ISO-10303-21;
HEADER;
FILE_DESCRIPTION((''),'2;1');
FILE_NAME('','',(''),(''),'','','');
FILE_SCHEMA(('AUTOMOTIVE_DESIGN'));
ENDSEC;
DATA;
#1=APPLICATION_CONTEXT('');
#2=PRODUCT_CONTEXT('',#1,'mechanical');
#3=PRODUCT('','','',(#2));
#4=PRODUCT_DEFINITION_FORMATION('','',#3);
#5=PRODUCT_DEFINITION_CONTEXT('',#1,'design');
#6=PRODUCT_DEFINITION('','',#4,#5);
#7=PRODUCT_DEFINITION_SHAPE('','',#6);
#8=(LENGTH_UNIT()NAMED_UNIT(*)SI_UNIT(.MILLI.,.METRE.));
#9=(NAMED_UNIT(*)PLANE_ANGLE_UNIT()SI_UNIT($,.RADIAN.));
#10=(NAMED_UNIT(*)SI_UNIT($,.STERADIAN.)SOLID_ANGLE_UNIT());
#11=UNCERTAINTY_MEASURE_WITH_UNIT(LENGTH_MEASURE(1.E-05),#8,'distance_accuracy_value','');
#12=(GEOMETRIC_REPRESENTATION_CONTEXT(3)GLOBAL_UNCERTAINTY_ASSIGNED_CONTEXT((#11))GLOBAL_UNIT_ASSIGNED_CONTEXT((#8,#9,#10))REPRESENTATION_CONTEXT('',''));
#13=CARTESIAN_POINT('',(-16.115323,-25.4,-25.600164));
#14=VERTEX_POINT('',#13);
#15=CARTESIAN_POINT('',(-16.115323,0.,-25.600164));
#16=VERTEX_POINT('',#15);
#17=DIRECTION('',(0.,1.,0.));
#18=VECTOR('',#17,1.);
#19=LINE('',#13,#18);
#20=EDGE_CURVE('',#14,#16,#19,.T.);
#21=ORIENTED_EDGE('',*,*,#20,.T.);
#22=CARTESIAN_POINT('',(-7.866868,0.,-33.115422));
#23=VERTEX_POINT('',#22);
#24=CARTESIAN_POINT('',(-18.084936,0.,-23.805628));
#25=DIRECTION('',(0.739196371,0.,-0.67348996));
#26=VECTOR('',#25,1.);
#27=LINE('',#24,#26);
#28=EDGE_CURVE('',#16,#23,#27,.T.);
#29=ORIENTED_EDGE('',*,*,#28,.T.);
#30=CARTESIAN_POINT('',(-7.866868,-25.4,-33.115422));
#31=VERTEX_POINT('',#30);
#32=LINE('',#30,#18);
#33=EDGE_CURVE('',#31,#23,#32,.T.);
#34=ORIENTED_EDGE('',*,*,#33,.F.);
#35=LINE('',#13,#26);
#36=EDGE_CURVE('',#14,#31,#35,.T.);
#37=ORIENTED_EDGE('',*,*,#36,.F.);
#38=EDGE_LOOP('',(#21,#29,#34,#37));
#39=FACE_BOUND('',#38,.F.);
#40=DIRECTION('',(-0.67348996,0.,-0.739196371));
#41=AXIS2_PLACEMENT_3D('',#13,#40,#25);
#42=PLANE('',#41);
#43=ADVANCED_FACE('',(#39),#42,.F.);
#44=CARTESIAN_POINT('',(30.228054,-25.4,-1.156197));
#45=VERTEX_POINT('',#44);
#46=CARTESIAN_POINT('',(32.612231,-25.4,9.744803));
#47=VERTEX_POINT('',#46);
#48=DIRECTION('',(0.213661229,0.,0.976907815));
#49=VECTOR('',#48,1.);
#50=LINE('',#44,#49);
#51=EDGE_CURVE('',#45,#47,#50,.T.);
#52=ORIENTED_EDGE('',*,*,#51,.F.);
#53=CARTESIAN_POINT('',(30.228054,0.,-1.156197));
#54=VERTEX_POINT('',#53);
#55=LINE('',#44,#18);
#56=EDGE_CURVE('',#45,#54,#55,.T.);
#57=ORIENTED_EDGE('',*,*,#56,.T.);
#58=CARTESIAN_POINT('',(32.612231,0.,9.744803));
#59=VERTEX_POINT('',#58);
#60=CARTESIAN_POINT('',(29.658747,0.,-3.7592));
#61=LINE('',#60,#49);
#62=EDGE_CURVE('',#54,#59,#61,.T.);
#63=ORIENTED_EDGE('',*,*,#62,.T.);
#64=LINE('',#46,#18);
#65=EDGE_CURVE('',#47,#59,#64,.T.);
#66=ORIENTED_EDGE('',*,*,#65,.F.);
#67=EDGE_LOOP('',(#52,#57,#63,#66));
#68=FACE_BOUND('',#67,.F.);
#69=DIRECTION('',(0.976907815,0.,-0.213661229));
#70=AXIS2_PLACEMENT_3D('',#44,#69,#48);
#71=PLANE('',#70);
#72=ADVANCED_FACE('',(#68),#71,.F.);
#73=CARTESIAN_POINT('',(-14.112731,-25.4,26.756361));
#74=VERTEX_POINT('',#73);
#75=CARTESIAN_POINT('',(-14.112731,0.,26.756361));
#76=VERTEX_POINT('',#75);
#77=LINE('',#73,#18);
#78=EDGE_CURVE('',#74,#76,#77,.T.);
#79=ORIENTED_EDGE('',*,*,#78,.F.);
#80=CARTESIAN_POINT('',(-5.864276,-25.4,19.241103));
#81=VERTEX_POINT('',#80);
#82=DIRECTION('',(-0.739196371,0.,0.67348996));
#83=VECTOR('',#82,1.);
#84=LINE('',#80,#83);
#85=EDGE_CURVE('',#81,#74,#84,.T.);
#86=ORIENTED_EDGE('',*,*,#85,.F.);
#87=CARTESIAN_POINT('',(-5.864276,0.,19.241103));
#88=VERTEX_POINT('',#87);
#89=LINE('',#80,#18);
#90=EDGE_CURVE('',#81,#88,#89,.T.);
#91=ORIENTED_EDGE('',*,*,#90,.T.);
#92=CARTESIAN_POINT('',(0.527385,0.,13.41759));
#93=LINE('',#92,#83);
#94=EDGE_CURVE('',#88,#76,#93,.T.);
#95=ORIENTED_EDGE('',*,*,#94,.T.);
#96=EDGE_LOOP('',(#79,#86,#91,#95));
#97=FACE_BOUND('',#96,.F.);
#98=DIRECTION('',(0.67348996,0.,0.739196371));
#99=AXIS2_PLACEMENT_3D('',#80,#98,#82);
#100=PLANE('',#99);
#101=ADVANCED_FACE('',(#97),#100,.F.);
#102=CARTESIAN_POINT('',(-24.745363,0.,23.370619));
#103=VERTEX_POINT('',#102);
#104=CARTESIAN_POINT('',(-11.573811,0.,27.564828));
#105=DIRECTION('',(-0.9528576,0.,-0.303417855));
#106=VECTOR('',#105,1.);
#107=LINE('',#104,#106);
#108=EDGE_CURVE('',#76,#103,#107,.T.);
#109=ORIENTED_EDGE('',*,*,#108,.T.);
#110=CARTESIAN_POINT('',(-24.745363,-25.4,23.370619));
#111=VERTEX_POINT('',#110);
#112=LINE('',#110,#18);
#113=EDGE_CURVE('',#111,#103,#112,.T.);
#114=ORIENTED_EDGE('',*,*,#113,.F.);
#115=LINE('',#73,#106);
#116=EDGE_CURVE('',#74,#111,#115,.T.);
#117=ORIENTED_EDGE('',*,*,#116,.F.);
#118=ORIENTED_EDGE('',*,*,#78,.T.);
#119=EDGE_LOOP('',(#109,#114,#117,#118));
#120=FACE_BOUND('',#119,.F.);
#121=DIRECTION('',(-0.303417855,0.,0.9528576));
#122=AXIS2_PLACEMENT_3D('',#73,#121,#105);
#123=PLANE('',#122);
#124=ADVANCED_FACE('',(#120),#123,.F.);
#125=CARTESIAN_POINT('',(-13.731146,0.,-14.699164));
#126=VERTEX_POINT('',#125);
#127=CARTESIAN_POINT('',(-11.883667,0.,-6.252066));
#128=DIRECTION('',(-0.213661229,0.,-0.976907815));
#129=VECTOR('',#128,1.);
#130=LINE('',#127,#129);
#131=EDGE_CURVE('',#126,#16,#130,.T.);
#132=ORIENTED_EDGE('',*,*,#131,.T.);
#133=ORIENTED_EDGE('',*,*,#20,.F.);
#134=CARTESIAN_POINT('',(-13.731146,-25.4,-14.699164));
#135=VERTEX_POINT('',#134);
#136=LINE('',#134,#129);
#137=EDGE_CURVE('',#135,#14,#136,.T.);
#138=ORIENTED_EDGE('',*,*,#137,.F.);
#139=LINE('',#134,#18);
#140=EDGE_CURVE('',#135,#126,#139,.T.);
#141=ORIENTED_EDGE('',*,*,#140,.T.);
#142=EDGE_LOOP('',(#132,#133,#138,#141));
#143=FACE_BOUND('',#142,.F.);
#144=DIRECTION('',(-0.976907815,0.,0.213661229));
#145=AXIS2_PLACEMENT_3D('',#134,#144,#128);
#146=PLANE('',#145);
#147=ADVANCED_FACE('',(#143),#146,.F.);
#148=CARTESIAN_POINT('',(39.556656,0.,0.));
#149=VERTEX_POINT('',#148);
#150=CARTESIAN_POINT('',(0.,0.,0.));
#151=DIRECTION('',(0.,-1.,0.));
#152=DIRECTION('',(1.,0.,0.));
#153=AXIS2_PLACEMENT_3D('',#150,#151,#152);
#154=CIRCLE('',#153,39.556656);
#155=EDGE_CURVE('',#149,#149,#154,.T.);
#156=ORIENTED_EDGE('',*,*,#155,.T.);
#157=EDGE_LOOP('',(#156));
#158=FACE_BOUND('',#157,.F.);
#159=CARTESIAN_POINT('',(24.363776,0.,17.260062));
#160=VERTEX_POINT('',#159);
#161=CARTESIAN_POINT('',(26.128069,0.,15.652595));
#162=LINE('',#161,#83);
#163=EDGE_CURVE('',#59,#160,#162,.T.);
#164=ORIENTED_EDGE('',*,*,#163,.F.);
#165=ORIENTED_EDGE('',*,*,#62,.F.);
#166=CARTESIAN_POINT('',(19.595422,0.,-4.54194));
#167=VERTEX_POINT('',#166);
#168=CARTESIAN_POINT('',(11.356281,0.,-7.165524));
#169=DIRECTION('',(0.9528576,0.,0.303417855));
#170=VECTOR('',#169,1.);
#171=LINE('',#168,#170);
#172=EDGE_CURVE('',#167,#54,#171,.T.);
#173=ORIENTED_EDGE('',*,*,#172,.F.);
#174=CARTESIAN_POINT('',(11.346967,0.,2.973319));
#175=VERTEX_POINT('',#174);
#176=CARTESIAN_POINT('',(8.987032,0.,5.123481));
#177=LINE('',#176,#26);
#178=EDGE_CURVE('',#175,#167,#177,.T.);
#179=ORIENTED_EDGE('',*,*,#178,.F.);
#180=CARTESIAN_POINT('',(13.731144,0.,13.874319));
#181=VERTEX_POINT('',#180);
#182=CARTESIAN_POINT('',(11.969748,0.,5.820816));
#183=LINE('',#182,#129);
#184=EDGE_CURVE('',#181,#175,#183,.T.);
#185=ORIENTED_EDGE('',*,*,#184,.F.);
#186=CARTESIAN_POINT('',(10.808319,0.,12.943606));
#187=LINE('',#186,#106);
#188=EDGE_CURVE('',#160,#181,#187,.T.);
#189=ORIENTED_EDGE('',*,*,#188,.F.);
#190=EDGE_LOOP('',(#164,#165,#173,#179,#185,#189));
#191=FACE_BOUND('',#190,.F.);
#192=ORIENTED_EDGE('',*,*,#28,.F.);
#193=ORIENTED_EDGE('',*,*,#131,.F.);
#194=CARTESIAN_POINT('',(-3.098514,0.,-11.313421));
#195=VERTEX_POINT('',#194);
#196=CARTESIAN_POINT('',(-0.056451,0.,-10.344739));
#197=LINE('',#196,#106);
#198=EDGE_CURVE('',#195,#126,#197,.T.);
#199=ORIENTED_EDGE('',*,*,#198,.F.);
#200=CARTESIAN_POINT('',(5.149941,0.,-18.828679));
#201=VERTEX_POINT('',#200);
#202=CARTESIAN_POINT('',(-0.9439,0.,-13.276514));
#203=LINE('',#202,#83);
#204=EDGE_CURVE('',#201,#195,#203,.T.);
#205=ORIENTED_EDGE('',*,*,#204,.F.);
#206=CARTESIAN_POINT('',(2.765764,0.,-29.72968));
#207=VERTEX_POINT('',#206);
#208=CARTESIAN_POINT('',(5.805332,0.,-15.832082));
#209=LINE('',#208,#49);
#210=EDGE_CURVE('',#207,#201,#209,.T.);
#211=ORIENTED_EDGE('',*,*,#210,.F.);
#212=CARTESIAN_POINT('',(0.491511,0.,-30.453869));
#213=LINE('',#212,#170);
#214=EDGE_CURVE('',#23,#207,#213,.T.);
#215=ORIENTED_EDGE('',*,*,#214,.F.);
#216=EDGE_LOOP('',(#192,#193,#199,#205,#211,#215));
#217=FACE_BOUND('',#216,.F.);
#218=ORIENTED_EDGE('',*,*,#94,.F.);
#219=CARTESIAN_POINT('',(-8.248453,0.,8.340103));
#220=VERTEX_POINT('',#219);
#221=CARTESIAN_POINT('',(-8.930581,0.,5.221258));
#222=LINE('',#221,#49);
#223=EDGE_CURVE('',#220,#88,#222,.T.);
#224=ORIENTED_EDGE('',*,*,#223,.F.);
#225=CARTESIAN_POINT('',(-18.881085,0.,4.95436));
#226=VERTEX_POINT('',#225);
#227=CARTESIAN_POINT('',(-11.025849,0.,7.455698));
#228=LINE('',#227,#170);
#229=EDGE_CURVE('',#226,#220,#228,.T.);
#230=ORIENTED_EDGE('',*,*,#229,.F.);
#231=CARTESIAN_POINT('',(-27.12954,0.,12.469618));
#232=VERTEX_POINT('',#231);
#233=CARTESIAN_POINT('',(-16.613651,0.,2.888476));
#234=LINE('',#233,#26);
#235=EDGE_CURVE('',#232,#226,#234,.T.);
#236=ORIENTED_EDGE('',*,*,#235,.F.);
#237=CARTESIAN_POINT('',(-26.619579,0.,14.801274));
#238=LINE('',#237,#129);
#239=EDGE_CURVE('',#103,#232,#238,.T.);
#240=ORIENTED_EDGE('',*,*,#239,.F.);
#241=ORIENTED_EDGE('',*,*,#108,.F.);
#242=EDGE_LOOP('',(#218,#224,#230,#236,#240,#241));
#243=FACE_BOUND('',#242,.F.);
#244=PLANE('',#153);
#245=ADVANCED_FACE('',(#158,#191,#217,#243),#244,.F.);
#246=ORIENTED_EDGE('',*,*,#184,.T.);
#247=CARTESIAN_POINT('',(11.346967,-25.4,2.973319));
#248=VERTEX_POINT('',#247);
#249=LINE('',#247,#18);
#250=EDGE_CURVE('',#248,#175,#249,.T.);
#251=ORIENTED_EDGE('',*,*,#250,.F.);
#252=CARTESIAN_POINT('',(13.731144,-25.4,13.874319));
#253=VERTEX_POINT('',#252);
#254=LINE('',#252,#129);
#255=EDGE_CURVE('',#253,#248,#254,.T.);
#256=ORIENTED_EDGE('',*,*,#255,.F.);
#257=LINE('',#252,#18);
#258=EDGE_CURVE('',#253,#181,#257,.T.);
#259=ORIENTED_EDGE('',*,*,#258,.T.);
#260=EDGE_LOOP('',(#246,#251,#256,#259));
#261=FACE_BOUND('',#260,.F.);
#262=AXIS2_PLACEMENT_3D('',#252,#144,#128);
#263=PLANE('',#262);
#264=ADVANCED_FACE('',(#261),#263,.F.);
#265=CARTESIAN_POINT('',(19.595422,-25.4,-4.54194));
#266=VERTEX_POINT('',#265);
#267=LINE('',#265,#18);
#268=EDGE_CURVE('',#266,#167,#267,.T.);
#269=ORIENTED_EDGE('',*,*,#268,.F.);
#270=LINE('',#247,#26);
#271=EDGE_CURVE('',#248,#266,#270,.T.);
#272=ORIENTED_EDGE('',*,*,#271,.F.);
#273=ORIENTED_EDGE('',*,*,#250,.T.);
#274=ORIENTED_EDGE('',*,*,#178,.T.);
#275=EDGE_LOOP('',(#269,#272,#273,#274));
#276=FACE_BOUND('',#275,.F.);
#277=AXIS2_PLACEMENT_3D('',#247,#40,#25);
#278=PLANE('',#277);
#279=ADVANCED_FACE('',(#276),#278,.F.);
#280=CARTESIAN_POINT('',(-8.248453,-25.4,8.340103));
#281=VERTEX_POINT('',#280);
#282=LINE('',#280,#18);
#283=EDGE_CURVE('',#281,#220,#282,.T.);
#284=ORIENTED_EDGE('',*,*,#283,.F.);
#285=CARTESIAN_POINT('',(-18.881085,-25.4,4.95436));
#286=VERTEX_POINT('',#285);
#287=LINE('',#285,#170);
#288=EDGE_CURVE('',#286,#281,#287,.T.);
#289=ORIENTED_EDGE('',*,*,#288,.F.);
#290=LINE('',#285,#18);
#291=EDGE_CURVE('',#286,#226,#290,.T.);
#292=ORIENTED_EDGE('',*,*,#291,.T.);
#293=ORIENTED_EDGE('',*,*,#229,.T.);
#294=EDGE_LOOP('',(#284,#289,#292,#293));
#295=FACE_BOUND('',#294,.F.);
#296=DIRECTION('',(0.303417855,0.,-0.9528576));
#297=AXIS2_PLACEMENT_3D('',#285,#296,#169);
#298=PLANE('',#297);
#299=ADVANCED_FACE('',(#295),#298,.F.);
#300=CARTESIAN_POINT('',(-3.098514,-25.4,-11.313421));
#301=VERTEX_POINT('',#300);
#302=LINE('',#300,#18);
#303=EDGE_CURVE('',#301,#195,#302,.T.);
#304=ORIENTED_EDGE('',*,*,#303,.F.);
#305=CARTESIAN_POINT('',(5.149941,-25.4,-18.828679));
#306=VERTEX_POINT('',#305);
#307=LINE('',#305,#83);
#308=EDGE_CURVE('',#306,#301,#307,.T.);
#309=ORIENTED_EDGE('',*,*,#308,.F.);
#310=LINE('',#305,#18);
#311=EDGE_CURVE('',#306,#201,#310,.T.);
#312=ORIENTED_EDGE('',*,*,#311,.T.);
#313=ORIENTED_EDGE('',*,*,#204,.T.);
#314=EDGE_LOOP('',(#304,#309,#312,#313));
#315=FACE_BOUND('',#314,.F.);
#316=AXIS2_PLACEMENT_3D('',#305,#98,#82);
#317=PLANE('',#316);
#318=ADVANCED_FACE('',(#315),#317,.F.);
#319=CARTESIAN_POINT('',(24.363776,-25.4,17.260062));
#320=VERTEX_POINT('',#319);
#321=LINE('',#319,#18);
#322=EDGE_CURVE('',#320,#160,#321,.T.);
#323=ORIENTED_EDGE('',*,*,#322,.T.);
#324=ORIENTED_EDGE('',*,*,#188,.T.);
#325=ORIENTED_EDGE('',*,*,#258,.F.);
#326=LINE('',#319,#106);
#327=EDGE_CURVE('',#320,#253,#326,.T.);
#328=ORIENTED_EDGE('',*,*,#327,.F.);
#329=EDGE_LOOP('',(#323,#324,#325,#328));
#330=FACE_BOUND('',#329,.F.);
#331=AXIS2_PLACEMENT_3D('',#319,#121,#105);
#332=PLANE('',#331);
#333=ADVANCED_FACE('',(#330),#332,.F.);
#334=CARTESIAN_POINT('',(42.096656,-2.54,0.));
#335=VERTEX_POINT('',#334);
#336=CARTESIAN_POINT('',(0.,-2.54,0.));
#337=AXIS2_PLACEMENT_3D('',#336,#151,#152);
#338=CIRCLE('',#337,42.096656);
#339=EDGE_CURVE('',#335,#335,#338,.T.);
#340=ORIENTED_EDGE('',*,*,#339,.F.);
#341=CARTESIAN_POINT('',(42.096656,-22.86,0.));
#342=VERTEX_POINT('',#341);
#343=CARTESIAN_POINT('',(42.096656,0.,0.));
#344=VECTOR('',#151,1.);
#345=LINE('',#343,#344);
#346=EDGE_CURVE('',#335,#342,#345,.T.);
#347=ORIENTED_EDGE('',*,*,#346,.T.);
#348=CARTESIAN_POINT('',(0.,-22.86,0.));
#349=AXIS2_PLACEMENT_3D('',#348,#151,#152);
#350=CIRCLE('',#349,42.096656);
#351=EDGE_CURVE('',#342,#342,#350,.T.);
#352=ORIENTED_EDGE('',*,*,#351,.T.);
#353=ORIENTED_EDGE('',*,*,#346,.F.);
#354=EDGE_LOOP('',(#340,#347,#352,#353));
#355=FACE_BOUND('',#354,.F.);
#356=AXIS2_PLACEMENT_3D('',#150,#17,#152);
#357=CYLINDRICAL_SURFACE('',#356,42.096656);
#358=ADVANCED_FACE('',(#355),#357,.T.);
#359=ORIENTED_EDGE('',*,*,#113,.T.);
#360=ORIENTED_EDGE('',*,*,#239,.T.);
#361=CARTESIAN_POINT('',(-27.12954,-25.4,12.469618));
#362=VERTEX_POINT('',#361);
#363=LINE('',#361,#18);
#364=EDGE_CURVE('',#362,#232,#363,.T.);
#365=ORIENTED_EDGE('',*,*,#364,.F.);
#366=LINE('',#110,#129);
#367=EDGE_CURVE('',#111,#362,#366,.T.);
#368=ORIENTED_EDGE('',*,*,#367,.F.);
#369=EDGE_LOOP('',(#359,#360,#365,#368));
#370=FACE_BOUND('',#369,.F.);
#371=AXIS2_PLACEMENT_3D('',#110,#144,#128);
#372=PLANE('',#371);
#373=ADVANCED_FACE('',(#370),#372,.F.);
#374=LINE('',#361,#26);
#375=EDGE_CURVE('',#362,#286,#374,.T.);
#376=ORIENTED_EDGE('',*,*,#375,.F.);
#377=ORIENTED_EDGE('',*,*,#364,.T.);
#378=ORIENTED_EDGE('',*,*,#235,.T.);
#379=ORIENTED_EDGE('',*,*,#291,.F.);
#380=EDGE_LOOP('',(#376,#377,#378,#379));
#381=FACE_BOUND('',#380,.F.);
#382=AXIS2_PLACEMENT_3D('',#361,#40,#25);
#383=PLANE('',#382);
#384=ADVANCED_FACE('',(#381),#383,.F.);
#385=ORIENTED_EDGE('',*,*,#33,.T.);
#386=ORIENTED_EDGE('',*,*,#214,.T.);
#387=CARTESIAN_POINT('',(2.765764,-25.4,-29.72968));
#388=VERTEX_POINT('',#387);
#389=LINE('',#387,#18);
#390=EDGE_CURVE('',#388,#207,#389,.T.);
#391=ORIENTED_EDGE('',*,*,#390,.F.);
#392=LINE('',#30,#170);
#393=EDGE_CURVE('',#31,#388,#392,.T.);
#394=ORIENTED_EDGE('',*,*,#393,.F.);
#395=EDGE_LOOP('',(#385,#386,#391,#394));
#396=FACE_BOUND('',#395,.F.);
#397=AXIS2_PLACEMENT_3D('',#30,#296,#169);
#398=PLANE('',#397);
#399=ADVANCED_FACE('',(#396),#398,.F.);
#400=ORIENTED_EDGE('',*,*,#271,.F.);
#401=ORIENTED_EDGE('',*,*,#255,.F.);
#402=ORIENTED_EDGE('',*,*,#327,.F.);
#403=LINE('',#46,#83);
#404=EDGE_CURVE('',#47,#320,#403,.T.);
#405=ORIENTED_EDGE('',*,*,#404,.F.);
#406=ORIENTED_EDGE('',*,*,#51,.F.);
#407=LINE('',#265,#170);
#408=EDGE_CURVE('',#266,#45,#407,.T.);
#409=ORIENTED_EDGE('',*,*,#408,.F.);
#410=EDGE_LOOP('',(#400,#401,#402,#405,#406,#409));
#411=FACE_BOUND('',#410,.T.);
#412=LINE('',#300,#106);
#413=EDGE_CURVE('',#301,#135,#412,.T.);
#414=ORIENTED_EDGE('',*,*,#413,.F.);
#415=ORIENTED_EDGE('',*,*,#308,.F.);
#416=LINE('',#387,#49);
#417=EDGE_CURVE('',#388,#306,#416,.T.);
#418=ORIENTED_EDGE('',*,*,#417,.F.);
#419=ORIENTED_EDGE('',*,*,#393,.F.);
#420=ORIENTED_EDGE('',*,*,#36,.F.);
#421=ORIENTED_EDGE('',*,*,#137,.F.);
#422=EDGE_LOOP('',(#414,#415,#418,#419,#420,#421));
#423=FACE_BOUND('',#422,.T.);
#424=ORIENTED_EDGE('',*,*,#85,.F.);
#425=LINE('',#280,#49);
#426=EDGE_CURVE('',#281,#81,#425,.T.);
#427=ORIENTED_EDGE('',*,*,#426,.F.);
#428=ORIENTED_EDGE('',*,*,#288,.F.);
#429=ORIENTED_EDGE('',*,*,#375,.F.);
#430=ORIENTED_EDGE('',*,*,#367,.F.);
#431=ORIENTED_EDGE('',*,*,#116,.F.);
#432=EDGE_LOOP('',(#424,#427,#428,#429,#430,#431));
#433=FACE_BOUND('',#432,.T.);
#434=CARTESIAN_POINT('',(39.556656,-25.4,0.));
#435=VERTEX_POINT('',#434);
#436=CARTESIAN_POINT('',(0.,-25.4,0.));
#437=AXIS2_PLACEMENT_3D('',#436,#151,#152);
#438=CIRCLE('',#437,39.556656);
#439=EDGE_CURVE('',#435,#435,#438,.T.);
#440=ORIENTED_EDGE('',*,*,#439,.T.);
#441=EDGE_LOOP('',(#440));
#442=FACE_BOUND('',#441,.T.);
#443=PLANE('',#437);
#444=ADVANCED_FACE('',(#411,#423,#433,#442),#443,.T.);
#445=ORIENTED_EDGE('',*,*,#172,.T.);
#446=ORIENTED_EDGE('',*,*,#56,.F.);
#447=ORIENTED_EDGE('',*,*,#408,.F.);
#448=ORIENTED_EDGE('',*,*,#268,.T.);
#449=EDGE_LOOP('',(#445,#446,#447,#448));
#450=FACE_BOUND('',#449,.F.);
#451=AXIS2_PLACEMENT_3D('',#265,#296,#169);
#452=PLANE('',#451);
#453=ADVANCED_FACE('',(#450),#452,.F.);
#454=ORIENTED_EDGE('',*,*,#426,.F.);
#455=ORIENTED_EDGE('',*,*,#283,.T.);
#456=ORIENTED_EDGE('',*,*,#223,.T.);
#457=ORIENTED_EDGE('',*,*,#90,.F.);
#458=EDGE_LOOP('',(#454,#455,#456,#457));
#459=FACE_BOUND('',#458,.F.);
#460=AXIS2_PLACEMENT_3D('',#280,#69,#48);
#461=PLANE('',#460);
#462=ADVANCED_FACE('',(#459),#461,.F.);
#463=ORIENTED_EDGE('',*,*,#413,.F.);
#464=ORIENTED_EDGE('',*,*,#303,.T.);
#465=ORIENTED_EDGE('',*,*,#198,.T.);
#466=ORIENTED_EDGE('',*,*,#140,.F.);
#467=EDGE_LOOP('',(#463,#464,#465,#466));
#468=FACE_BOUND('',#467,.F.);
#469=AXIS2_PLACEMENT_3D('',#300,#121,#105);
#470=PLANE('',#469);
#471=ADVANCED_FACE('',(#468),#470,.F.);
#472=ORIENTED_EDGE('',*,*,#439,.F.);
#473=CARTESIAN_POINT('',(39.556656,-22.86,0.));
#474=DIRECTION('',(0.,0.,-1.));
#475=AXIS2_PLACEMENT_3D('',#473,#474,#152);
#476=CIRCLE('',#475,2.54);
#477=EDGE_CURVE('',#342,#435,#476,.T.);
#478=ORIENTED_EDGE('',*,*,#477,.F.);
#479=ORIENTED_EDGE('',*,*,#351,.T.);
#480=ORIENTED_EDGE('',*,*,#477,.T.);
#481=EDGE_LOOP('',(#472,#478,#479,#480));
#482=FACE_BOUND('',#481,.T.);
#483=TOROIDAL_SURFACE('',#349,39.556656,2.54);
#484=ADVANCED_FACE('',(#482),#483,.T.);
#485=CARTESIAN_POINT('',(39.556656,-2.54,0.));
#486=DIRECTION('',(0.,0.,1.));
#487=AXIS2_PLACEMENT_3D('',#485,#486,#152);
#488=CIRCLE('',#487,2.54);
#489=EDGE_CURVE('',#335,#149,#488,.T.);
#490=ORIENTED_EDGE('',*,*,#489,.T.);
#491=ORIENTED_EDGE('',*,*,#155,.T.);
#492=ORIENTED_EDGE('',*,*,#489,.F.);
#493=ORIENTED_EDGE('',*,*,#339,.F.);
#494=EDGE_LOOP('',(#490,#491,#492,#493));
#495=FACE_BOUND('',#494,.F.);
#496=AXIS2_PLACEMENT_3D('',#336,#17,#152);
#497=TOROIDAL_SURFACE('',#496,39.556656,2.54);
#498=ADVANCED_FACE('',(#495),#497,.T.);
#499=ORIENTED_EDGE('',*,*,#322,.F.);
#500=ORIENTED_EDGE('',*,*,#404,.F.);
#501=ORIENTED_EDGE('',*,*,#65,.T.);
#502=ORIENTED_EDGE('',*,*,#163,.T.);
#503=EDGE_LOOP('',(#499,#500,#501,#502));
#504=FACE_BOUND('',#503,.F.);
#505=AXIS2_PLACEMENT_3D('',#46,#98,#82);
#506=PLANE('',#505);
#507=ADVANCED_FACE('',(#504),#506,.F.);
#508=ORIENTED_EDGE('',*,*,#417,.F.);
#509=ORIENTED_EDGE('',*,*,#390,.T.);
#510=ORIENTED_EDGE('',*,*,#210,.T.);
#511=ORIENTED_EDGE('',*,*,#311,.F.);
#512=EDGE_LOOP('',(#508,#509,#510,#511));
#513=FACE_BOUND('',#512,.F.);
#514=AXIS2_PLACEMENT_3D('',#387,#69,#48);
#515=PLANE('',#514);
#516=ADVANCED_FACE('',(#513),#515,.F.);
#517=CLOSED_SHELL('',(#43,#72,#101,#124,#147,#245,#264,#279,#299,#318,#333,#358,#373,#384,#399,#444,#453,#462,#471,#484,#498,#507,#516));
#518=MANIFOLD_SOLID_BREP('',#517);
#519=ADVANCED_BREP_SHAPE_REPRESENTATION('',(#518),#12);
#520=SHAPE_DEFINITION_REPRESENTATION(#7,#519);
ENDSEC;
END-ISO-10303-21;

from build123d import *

# Parameters (mm, degrees)
F0_R            = 42.0966561171
F1_DEPTH        = 25.4
F3_DEPTH        = 25.401
F3_COPIES_COUNT = 3
F4_R            = 2.54
F5_R            = 2.54


# Not quite as in the source:
# - a pattern or mirror of a feature is missing from the dataset's text; its kind, count and spacing are read off the source's solid


with BuildPart() as f1:
    # F0 (on Front) → F1 (new body)
    with BuildSketch(Plane.XZ):
        Circle(F0_R)
    extrude(amount=F1_DEPTH)

    # F2 (on face) → F3 (cut, through all)
    with BuildSketch(Plane.XZ.offset(25.4)):
        Polygon((-18.881084953, 4.9543602206), (-8.2484530285, 8.3401026204), (-5.8642759952, 19.241103176), (-14.1127308863, 26.7563613318), (-24.7453628108, 23.3706189319), (-27.1295398441, 12.4696183764), align=None)
    f3 = extrude(amount=-F3_DEPTH, mode=Mode.SUBTRACT)

    # F3_copies: F3 ×3 about axis
    f3_copies_axis = Axis((0, 0, 0), (0, 1, 0))
    for i in range(1, F3_COPIES_COUNT):
        add(f3.rotate(f3_copies_axis, i * 360 / F3_COPIES_COUNT), mode=Mode.SUBTRACT)

    # F4
    f4_edges = [f1.edges().sort_by_distance(p)[0] for p in [
        (-42.096656, -25.4, 0),
    ]]
    fillet(f4_edges, radius=F4_R)

    # F5
    f5_edges = [f1.edges().sort_by_distance(p)[0] for p in [
        (-42.096656, 0, 0),
    ]]
    fillet(f5_edges, radius=F5_R)


solid = f1.part
